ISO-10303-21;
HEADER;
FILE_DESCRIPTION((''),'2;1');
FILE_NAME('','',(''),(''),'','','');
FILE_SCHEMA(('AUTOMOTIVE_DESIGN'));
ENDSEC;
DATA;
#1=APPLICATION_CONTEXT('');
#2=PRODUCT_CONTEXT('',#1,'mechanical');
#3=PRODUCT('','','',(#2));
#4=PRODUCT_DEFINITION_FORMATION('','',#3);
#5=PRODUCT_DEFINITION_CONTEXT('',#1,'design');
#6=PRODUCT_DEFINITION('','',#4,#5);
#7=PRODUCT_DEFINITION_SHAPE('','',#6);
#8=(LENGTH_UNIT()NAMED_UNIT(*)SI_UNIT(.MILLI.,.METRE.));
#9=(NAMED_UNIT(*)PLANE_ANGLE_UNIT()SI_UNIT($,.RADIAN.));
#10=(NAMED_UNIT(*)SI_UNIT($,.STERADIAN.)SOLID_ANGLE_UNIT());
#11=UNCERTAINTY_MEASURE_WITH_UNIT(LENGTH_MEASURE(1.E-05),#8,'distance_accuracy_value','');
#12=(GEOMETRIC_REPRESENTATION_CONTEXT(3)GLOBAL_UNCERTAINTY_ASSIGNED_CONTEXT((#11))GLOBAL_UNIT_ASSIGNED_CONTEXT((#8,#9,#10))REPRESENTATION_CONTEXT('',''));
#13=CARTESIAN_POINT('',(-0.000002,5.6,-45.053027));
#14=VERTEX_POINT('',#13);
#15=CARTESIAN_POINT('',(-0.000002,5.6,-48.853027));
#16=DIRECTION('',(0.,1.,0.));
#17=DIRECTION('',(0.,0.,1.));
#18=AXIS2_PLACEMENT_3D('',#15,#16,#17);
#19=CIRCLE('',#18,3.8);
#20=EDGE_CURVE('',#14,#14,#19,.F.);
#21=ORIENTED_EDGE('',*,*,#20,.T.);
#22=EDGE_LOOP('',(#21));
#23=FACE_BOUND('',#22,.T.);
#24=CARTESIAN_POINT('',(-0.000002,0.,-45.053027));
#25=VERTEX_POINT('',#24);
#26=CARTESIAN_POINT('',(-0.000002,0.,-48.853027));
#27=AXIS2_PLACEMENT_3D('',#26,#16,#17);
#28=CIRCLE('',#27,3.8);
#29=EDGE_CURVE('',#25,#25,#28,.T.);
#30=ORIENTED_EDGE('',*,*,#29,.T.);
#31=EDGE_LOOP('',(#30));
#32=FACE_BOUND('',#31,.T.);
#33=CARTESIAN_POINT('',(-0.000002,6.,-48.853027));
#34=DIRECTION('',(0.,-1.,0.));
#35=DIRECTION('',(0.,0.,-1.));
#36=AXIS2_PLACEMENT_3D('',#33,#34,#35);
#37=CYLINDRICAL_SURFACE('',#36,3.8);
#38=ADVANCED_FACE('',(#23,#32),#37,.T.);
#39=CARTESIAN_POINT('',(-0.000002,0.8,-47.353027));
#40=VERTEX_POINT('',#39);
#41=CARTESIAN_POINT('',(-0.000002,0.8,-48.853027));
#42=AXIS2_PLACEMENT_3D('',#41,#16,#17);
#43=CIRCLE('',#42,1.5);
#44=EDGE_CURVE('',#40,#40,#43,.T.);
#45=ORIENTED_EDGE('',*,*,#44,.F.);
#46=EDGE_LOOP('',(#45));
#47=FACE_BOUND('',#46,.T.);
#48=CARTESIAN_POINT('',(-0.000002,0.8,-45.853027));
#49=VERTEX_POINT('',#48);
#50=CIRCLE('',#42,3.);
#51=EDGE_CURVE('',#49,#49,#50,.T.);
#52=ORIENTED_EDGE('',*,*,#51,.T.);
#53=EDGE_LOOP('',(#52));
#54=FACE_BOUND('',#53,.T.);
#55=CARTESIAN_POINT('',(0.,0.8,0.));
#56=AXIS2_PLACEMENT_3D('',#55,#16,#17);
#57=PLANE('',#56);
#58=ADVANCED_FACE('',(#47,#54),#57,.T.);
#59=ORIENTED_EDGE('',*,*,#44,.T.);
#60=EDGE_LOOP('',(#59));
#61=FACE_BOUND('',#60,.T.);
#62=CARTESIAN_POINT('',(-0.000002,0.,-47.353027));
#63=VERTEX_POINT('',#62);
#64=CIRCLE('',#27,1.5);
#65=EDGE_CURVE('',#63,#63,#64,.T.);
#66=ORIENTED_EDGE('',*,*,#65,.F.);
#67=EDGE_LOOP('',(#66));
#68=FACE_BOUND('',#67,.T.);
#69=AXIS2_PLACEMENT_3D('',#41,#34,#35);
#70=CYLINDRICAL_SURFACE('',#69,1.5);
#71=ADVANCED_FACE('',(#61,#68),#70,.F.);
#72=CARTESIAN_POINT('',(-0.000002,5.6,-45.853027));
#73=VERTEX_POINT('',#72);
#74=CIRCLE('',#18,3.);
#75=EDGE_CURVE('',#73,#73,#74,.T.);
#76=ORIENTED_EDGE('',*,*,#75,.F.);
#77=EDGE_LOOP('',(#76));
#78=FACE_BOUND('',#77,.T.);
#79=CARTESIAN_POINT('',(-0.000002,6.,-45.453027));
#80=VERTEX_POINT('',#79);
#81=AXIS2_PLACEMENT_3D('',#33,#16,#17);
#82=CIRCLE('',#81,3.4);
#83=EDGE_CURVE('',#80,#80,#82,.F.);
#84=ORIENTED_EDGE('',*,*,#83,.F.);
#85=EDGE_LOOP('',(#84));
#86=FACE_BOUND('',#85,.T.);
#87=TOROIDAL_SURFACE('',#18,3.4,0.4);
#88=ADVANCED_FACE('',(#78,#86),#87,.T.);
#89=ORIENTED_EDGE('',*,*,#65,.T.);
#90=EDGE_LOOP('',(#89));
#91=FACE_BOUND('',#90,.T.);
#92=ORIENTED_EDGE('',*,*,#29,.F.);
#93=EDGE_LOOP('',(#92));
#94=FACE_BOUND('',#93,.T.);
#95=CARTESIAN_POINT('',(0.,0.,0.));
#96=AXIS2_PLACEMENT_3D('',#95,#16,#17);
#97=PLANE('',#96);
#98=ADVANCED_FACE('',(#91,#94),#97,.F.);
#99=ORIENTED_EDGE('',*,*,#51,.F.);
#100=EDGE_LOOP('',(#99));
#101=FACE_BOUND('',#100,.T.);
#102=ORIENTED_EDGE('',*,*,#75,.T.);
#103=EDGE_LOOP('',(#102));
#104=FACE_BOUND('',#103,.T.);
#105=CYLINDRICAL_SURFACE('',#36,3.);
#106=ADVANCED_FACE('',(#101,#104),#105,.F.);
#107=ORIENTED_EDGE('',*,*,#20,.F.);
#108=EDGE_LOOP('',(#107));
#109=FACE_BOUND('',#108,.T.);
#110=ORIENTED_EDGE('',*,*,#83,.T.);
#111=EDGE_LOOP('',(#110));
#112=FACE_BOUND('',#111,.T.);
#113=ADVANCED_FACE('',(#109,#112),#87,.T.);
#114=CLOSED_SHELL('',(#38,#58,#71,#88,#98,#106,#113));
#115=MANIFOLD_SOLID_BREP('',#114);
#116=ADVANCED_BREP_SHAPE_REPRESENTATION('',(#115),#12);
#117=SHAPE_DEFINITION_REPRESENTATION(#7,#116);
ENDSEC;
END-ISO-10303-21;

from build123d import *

# Parameters (mm, degrees)
SKETCH_1_R      = 3.8
SKETCH_1_R_2    = 3
EXTRUDE_1_DEPTH = 6
SKETCH_1_13_R   = 3
SKETCH_1_13_R_2 = 1.5
EXTRUDE_2_DEPTH = 0.8
FILLET_1_R      = 0.4


with BuildPart() as part:
    # 草图1 → 凸台-拉伸1 (new body)
    with BuildSketch(Plane(origin=(0, 0, 0), x_dir=(1, 0, 0), z_dir=(0, 1, 0))):
        with Locations(Location((-1.835e-06, 48.853027267, 0), (0, 0, 270))):
            Circle(SKETCH_1_R)
        with Locations(Location((-1.835e-06, 48.853027267, 0), (0, 0, 270))):
            Circle(SKETCH_1_R_2, mode=Mode.SUBTRACT)
    extrude(amount=EXTRUDE_1_DEPTH)

    # 草图1<13> → 凸台-拉伸2 (add)
    with BuildSketch(Plane(origin=(0, 0, 0), x_dir=(1, 0, 0), z_dir=(0, 1, 0))):
        with Locations(Location((-1.835e-06, 48.853027267, 0), (0, 0, 270))):
            Circle(SKETCH_1_13_R)
        with Locations(Location((-1.835e-06, 48.853027267, 0), (0, 0, 270))):
            Circle(SKETCH_1_13_R_2, mode=Mode.SUBTRACT)
    extrude(amount=EXTRUDE_2_DEPTH)

    # 圆角1
    fillet_1_edges = [part.edges().sort_by_distance(p)[0] for p in [
        (-1.835e-06, 6, -52.653027267),
        (-1.835e-06, 6, -51.853027267),
    ]]
    fillet(fillet_1_edges, radius=FILLET_1_R - 0.0001)  # a hair under: the kernel refuses the full size


solid = part.part
